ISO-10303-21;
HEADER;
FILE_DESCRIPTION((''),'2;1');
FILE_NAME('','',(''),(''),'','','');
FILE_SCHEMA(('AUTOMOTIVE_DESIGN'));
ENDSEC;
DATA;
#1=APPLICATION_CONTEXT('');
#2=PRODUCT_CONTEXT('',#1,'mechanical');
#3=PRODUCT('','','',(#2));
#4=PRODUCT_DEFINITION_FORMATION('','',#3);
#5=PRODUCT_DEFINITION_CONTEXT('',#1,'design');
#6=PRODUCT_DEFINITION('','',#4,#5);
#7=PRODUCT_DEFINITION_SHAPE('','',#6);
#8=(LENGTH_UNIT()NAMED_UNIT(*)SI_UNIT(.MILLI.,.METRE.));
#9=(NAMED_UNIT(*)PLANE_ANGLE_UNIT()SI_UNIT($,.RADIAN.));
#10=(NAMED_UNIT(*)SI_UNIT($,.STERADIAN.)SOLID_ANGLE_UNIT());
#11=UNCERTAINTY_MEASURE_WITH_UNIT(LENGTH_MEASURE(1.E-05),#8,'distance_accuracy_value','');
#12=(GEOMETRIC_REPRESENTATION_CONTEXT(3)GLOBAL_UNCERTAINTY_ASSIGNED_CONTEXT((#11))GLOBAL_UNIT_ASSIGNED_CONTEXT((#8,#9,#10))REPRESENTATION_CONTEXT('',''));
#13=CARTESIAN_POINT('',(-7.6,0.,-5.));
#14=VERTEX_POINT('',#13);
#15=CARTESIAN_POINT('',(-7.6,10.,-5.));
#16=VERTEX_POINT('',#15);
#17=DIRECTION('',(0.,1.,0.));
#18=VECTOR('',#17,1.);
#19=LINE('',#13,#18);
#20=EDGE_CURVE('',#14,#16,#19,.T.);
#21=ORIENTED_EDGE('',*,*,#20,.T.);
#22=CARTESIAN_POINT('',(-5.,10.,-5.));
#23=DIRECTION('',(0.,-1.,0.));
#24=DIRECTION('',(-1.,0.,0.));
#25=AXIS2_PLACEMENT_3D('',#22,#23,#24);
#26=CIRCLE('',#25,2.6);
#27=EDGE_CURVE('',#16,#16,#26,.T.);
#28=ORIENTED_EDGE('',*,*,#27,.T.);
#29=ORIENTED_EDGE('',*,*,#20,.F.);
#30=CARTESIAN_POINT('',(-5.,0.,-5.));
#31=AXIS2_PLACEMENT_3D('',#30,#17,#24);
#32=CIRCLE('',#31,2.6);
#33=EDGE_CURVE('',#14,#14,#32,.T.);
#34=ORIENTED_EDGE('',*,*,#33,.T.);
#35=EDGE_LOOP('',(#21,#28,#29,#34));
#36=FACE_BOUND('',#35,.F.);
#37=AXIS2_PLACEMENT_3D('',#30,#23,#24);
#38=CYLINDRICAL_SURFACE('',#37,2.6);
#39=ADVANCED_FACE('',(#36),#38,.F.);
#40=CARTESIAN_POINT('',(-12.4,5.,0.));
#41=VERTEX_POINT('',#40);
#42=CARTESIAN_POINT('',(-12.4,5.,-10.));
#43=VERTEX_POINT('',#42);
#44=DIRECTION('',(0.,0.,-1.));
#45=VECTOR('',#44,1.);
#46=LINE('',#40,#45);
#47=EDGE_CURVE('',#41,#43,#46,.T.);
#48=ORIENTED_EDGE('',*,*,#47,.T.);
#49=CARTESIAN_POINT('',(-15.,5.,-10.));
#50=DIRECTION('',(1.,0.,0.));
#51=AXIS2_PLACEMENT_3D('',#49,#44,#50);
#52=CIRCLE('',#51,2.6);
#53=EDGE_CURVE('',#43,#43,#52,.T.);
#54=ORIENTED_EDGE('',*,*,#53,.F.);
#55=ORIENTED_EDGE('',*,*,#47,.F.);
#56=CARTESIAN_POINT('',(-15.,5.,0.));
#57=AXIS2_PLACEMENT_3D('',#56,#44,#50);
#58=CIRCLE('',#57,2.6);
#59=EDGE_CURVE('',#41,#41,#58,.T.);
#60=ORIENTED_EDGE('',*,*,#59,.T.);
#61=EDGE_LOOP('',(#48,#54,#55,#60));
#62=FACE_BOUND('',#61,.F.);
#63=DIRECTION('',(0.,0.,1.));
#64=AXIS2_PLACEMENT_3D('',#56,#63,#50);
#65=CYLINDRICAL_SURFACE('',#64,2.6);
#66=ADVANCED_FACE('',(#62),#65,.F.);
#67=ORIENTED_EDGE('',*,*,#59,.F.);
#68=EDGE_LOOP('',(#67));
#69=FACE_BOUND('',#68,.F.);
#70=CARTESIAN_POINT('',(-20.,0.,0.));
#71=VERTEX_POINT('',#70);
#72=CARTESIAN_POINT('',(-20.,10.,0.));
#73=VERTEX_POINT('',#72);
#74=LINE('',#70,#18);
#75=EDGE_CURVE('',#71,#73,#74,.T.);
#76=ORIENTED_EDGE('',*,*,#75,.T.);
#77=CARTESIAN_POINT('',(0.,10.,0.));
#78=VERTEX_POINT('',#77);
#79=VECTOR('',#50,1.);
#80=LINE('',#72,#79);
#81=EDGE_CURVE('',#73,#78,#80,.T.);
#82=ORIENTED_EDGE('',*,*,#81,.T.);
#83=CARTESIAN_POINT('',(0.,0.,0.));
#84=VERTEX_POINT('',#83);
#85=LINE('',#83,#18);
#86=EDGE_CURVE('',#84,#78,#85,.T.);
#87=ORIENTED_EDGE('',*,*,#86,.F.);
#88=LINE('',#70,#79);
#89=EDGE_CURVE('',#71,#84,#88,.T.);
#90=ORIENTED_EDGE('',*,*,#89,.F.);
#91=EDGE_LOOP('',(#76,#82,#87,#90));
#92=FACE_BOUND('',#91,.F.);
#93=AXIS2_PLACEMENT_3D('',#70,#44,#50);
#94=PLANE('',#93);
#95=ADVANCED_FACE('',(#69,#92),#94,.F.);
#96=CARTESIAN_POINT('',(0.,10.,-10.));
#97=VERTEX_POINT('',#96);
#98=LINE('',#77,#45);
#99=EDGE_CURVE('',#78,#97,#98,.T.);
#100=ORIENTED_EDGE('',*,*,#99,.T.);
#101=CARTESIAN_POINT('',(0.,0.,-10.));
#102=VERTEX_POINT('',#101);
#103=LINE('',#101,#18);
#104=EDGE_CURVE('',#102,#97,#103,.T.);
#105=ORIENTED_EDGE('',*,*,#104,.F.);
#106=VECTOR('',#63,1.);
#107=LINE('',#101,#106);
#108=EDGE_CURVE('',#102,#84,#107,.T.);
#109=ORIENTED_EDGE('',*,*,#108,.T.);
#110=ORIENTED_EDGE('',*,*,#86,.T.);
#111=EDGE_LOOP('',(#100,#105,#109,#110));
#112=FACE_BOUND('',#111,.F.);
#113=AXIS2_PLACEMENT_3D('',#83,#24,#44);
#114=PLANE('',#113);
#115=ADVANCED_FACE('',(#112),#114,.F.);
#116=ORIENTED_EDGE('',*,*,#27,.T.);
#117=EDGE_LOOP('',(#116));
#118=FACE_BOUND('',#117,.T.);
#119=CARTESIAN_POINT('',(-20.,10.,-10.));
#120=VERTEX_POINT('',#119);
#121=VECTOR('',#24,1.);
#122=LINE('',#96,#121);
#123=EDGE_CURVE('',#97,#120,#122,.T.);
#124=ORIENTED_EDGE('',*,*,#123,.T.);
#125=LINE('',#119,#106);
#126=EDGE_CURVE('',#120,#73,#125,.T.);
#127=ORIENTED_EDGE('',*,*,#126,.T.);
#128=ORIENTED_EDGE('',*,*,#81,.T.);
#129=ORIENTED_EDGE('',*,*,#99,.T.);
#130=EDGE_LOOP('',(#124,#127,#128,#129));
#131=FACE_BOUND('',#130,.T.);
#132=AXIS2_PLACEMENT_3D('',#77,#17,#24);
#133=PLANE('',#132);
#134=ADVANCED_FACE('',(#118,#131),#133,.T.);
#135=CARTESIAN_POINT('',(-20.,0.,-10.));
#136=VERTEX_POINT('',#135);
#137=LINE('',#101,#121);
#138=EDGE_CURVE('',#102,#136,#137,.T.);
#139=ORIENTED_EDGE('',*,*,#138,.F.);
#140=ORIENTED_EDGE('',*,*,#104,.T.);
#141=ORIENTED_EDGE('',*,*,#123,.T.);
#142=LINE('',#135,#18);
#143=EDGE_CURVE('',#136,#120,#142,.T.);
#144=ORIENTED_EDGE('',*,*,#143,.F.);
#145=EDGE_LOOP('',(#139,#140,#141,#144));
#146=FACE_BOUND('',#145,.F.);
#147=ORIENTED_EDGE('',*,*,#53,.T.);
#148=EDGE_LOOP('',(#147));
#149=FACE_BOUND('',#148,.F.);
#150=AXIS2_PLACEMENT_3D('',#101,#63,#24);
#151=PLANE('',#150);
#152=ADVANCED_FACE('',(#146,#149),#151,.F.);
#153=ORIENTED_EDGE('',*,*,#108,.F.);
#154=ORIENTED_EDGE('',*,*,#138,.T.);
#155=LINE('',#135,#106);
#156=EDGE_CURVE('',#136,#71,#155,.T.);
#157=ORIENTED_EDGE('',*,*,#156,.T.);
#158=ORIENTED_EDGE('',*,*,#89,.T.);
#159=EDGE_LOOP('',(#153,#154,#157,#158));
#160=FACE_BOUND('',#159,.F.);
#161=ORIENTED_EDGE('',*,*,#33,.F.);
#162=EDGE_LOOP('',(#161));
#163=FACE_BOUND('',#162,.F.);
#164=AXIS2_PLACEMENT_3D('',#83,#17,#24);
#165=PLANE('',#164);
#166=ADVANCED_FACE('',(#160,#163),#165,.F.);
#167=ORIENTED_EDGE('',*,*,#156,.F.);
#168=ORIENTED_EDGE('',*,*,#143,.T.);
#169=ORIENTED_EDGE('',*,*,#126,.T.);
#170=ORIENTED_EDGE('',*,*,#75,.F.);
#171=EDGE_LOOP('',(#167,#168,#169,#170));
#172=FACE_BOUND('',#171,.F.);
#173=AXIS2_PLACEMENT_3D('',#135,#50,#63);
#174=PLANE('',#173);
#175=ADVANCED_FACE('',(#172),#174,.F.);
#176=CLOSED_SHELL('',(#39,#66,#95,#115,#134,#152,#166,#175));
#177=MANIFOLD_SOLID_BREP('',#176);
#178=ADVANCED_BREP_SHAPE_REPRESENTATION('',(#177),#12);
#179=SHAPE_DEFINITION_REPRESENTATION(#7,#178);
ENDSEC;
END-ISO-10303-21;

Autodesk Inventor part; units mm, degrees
ref_plane "YZ Plane" through (0, 0, 0) normal (1, 0, 0) x (0, 1, 0)
ref_plane "XZ Plane" through (0, 0, 0) normal (0, 1, 0) x (-1, 0, 0)
ref_plane "XY Plane" through (0, 0, 0) normal (0, 0, 1) x (1, 0, 0)
sketch "Sketch1" plane through (0, 0, 0) normal (0, 1, 0) x (-1, 0, 0)
  line L0 (0, 0) -> (0, -10)
  line L1 (0, -10) -> (20, -10)
  line L2 (20, -10) -> (20, 0)
  line L3 (20, 0) -> (0, 0)
  line L4 (0, -5) -> (5, -5)
  circle A0 centre (5, -5) radius 2.6
  dimension "d0" = 10
  dimension "d1" = 20
  dimension "d2" = 5
  dimension "d3" = 5.2
extrude "Extrusion1" add sketch "Sketch1" along normal blind 10
sketch "Sketch2" plane through (-20, 0, 0) normal (0, 0, 1) x (1, 0, 0)
  line L0 (0, 10) -> (0, 0)
  line L1 (0, 0) -> (0, 10) projected
  line L2 (0, 5) -> (5, 5)
  circle A0 centre (5, 5) radius 2.6
  point P0 (20, 0)
  dimension "d6" = 5
  dimension "d7" = 5.2
extrude "Extrusion2" cut sketch "Sketch2" against normal blind 11
properties part number "roller_joint"
